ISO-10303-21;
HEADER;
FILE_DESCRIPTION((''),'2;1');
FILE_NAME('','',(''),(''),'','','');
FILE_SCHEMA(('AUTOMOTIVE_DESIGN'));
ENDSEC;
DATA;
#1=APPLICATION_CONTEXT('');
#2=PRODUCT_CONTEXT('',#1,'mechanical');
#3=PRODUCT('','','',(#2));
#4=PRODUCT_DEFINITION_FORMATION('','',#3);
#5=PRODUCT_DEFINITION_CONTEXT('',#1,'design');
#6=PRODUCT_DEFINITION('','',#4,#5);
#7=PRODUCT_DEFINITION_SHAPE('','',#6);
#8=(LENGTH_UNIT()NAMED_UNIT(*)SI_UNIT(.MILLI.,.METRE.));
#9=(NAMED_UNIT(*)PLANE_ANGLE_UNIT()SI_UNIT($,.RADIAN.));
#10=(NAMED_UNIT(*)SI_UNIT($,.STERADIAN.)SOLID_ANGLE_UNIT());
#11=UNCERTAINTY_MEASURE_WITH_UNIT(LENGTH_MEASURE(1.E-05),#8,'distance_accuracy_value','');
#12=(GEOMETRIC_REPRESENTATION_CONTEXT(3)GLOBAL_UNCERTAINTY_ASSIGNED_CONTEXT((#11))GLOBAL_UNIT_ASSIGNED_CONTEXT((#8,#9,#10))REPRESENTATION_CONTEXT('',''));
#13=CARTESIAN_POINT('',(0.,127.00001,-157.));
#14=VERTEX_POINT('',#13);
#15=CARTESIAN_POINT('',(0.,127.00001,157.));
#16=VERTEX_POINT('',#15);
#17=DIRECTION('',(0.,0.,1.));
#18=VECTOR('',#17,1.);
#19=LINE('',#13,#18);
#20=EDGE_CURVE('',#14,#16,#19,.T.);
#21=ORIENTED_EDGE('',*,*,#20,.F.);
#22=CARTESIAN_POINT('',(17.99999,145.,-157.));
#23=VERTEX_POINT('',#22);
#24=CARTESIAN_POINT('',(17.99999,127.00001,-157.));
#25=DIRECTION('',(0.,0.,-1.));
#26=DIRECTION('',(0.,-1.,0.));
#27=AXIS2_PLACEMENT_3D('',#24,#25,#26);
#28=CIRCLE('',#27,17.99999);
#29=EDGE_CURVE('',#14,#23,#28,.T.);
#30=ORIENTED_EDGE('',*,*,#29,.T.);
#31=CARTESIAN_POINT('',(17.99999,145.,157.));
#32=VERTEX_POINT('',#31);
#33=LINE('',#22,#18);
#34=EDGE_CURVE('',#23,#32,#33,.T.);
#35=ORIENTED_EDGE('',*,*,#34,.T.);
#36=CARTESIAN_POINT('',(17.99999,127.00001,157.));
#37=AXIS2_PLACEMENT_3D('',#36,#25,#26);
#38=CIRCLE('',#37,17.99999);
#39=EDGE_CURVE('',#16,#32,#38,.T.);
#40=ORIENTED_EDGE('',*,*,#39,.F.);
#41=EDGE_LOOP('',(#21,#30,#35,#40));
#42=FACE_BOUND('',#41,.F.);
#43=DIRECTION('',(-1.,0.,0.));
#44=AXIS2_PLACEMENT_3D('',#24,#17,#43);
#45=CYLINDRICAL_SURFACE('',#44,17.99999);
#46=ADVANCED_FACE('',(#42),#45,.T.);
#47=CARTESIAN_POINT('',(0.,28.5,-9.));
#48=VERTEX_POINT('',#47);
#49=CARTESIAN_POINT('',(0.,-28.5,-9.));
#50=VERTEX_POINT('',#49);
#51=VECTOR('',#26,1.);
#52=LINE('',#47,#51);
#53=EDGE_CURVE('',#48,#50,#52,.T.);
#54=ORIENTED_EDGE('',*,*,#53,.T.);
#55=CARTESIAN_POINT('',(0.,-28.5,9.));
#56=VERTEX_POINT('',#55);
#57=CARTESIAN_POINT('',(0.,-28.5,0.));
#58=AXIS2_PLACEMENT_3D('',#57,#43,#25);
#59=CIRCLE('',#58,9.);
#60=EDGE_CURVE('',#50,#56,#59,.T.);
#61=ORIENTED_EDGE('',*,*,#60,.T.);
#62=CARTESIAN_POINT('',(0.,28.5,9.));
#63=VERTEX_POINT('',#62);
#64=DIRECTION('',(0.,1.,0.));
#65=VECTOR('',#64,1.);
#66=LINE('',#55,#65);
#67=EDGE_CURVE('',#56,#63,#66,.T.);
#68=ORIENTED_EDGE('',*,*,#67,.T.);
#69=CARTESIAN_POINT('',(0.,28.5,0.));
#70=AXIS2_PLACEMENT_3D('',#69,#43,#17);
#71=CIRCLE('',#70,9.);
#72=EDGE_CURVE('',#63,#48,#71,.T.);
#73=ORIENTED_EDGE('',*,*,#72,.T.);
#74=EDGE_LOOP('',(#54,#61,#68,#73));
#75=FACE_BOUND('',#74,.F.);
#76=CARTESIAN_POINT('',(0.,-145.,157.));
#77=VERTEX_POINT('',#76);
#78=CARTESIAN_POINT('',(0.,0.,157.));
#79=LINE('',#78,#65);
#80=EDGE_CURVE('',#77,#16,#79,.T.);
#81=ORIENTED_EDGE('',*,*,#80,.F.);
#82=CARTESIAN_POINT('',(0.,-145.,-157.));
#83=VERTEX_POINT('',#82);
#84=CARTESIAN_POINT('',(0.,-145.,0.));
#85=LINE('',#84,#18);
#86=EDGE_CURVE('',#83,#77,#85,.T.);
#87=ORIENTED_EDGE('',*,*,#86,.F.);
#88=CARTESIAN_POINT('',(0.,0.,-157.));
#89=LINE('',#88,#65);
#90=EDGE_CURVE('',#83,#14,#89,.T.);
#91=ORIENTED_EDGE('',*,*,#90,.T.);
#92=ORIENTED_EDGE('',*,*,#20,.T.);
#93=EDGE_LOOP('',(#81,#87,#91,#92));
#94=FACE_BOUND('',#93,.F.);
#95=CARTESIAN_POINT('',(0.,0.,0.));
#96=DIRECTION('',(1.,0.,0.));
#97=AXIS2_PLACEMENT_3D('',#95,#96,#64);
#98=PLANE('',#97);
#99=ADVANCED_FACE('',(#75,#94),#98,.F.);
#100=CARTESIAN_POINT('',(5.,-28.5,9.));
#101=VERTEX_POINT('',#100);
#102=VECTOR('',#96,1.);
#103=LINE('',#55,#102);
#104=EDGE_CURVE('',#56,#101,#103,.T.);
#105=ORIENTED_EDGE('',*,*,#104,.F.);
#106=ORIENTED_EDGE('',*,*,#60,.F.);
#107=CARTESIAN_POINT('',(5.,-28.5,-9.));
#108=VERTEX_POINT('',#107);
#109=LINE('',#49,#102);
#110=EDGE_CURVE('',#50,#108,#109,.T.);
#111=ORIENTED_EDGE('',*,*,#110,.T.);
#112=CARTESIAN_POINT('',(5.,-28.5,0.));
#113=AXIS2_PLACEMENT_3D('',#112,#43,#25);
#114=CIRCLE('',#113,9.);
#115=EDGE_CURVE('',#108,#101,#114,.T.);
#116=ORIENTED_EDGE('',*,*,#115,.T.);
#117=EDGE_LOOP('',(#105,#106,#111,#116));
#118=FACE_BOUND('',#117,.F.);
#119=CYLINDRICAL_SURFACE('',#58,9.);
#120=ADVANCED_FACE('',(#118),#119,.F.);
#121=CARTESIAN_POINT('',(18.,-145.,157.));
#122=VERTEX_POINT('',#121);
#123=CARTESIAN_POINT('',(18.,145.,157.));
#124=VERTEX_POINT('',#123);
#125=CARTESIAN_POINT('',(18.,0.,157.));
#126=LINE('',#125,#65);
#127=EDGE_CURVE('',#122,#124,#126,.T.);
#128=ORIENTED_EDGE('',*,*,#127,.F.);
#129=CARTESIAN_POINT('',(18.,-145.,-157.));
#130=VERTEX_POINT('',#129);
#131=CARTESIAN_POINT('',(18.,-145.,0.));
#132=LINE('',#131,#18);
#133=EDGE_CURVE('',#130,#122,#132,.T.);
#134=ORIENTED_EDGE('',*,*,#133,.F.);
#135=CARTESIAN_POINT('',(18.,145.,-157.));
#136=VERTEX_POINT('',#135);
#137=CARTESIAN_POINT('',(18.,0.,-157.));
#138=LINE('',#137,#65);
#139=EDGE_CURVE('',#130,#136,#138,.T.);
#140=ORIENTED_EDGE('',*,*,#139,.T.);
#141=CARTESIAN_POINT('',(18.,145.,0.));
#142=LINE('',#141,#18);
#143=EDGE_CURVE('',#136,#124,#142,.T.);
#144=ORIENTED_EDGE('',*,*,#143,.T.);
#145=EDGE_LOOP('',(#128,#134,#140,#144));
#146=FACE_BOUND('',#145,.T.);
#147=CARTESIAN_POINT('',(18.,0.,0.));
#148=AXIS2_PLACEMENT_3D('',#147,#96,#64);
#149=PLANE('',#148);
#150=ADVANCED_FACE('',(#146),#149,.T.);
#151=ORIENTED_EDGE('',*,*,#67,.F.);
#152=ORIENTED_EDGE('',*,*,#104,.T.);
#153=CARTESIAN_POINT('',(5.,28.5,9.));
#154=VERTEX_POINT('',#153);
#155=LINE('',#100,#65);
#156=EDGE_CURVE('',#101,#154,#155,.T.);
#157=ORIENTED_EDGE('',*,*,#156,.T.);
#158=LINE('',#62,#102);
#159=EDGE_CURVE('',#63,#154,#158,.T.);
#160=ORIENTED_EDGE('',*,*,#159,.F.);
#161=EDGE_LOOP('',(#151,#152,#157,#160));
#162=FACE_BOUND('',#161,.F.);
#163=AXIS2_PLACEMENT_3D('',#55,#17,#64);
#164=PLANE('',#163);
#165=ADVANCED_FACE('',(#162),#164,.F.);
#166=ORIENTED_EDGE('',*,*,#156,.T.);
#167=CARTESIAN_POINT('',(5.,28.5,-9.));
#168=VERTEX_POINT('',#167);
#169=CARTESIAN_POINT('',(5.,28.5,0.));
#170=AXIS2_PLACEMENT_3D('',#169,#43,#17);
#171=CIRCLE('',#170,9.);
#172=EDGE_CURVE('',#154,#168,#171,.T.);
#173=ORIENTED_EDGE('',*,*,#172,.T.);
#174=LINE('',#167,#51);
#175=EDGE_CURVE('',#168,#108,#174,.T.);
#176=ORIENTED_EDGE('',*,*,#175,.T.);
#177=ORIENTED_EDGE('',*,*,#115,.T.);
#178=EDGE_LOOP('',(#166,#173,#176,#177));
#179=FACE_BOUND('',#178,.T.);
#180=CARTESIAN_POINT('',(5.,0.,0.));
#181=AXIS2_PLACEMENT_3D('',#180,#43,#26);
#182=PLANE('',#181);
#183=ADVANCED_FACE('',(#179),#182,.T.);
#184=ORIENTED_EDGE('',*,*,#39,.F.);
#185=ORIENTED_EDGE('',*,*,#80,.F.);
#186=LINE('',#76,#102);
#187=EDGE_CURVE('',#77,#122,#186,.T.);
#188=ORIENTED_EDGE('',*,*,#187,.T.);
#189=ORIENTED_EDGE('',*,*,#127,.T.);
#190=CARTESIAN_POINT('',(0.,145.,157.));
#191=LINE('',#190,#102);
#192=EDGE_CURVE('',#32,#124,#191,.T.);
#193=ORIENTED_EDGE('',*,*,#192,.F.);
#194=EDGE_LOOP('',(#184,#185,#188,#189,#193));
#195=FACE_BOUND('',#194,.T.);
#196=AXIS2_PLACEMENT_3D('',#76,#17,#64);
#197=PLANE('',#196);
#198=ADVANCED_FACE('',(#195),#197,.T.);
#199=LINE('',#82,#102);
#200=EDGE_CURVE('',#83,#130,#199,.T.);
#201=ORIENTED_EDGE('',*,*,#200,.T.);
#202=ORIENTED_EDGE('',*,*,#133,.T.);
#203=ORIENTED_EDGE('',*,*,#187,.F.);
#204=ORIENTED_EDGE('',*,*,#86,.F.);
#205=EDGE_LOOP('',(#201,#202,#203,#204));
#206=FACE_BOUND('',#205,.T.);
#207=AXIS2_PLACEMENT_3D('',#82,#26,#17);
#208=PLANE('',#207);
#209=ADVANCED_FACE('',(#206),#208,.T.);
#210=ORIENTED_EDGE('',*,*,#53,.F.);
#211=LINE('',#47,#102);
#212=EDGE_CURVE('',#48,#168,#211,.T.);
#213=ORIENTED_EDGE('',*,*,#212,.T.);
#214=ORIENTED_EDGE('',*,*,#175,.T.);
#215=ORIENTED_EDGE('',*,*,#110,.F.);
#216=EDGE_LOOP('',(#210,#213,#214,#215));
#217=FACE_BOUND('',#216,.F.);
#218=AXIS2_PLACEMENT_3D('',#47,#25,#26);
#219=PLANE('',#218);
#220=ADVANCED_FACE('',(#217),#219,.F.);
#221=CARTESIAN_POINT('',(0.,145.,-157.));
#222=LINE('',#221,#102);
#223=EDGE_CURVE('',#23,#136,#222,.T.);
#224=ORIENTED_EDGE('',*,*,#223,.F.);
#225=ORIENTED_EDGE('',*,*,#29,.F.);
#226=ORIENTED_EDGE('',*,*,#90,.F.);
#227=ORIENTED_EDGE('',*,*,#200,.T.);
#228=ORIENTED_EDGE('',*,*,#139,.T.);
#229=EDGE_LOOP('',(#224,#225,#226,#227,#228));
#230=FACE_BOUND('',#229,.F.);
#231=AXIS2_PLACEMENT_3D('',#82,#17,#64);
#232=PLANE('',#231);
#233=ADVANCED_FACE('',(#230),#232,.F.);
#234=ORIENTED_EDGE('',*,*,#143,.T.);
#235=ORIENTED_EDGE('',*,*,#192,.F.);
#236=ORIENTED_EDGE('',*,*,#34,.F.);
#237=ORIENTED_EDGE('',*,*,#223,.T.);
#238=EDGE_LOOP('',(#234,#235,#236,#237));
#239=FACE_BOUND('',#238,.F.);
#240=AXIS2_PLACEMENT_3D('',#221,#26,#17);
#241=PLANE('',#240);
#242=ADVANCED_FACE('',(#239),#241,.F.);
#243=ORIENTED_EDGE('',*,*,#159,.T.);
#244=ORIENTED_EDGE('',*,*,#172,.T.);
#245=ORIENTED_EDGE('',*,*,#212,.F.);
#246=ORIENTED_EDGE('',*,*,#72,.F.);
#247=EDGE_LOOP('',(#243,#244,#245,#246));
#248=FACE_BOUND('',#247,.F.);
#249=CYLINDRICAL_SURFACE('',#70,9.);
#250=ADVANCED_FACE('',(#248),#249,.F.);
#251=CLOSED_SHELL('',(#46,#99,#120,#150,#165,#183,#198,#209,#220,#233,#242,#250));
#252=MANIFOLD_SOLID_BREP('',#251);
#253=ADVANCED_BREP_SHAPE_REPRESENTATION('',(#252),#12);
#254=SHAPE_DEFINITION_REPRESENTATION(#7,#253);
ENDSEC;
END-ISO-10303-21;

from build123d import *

# Parameters (mm, degrees)
F0_W     = 290
F0_H     = 314
F1_DEPTH = 18
F3_DEPTH = 5
F4_R     = 17.99999


# Not quite as in the source:
# - a fillet or chamfer is up to 0.001 mm smaller than in the source, because OpenCascade refuses the exact size


with BuildPart() as f1:
    # F0 (on Right) → F1 (new body)
    with BuildSketch(Plane.YZ):
        Rectangle(F0_W, F0_H)
    extrude(amount=F1_DEPTH)

    # F2 (on face) → F3 (cut)
    with BuildSketch(Plane(origin=(0, 0, 0), x_dir=(0, -1, 0), z_dir=(-1, 0, 0))):
        with BuildLine():
            Line((28.5, 9), (-28.5, 9))
            ThreePointArc((-28.5, 9), (-37.5, 0), (-28.5, -9))
            Line((-28.5, -9), (28.5, -9))
            ThreePointArc((28.5, -9), (37.5, 0), (28.5, 9))
        make_face()
    extrude(amount=-F3_DEPTH, mode=Mode.SUBTRACT)

    # F4 (radius 18 in the source; OpenCascade refuses exactly that, so slightly less here)
    f4_edges = [f1.edges().sort_by_distance(p)[0] for p in [
        (0, 145, 0),
    ]]
    fillet(f4_edges, radius=F4_R)


solid = f1.part
